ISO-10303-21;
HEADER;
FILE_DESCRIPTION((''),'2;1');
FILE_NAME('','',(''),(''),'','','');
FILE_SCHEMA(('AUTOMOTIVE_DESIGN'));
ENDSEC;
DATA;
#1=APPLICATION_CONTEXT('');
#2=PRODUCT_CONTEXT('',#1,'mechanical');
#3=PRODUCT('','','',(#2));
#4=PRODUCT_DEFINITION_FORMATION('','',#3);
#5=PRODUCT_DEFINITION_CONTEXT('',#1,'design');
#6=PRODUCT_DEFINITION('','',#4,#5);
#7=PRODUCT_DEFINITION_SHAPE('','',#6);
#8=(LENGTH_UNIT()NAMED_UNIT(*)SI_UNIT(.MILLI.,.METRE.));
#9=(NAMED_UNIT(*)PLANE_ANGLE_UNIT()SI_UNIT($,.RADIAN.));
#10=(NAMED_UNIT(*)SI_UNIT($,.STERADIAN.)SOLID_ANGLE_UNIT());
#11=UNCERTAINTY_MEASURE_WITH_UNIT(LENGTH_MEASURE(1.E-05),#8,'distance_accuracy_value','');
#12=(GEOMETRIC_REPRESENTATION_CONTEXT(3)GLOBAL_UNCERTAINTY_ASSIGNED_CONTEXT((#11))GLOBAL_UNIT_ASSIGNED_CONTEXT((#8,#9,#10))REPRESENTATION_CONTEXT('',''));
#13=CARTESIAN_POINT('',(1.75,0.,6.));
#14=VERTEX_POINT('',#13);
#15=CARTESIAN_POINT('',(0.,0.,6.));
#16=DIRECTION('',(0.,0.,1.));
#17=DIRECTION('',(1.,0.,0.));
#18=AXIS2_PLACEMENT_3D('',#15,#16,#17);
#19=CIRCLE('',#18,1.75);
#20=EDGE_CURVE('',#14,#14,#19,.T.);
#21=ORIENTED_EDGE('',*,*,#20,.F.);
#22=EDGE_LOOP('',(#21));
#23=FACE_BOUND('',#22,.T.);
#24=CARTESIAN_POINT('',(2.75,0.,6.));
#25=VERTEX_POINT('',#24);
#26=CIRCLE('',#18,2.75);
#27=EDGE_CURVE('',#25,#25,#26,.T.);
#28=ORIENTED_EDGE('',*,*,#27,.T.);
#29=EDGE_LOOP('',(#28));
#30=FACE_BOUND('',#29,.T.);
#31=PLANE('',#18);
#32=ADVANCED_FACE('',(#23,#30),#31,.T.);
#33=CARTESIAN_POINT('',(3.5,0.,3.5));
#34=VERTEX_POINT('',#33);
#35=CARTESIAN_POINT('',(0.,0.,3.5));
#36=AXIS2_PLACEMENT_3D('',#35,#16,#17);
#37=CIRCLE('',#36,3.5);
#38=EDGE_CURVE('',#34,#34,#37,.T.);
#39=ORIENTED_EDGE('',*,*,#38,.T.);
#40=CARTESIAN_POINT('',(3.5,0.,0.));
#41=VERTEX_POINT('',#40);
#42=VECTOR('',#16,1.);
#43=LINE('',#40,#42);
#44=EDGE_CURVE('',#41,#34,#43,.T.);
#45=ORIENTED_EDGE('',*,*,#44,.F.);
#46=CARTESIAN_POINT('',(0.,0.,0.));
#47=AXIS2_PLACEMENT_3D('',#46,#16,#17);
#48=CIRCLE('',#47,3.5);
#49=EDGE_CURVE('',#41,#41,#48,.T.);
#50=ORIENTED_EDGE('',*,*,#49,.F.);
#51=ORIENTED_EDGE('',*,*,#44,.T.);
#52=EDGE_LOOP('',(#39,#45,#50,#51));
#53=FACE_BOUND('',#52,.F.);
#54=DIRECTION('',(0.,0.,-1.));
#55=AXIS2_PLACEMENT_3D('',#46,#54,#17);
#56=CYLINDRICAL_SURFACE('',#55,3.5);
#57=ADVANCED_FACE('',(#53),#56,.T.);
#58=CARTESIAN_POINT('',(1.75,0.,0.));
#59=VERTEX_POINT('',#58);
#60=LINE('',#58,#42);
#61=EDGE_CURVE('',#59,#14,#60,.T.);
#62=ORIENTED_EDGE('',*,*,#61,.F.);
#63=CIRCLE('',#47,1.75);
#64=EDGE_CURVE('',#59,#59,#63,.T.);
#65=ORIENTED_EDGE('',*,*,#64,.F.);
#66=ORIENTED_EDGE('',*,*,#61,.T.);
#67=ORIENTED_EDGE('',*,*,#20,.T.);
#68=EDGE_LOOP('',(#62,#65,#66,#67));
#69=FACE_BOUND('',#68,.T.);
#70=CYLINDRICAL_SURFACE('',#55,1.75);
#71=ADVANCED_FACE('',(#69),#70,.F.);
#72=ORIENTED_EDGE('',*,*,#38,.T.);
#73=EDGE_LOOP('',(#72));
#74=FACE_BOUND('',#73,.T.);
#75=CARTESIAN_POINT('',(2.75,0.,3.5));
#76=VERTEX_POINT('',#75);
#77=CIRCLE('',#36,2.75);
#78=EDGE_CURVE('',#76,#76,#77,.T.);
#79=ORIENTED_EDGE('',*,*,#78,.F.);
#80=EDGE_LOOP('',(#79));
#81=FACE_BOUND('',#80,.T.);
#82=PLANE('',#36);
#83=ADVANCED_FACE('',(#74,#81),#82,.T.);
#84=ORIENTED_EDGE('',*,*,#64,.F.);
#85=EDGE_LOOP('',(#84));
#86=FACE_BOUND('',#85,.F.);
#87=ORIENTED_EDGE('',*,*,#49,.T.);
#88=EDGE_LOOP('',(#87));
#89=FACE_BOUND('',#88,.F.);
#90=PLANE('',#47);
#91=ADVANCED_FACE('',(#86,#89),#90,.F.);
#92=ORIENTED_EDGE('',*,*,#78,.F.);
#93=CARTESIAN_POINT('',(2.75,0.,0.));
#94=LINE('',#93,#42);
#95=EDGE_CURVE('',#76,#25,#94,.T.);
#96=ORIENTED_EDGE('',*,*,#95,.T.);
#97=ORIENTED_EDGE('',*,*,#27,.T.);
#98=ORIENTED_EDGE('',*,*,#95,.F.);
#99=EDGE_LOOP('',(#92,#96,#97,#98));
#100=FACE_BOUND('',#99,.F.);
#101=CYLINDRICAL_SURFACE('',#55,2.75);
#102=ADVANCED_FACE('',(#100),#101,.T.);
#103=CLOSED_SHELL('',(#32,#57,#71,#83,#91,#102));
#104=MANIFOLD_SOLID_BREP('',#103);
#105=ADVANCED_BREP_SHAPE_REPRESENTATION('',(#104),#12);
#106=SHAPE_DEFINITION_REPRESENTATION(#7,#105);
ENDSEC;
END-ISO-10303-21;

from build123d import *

# Parameters (mm, degrees)
F0_R     = 2.75
F0_R_2   = 1.75
F1_DEPTH = 6
F0_R_3   = 3.5
F2_DEPTH = 3.5


# Not quite as in the source:
# - a feature names something its author has since deleted; it is built from what else it names


with BuildPart() as f1:
    # F0 (on Top) → F1 (new body)
    with BuildSketch(Plane.XY):
        Circle(F0_R)
        Circle(F0_R_2, mode=Mode.SUBTRACT)
    extrude(amount=F1_DEPTH)

    # F0 (on Top) → F2 (join)
    with BuildSketch(Plane.XY):
        Circle(F0_R_3)
        Circle(F0_R, mode=Mode.SUBTRACT)
    extrude(amount=F2_DEPTH)


solid = f1.part
